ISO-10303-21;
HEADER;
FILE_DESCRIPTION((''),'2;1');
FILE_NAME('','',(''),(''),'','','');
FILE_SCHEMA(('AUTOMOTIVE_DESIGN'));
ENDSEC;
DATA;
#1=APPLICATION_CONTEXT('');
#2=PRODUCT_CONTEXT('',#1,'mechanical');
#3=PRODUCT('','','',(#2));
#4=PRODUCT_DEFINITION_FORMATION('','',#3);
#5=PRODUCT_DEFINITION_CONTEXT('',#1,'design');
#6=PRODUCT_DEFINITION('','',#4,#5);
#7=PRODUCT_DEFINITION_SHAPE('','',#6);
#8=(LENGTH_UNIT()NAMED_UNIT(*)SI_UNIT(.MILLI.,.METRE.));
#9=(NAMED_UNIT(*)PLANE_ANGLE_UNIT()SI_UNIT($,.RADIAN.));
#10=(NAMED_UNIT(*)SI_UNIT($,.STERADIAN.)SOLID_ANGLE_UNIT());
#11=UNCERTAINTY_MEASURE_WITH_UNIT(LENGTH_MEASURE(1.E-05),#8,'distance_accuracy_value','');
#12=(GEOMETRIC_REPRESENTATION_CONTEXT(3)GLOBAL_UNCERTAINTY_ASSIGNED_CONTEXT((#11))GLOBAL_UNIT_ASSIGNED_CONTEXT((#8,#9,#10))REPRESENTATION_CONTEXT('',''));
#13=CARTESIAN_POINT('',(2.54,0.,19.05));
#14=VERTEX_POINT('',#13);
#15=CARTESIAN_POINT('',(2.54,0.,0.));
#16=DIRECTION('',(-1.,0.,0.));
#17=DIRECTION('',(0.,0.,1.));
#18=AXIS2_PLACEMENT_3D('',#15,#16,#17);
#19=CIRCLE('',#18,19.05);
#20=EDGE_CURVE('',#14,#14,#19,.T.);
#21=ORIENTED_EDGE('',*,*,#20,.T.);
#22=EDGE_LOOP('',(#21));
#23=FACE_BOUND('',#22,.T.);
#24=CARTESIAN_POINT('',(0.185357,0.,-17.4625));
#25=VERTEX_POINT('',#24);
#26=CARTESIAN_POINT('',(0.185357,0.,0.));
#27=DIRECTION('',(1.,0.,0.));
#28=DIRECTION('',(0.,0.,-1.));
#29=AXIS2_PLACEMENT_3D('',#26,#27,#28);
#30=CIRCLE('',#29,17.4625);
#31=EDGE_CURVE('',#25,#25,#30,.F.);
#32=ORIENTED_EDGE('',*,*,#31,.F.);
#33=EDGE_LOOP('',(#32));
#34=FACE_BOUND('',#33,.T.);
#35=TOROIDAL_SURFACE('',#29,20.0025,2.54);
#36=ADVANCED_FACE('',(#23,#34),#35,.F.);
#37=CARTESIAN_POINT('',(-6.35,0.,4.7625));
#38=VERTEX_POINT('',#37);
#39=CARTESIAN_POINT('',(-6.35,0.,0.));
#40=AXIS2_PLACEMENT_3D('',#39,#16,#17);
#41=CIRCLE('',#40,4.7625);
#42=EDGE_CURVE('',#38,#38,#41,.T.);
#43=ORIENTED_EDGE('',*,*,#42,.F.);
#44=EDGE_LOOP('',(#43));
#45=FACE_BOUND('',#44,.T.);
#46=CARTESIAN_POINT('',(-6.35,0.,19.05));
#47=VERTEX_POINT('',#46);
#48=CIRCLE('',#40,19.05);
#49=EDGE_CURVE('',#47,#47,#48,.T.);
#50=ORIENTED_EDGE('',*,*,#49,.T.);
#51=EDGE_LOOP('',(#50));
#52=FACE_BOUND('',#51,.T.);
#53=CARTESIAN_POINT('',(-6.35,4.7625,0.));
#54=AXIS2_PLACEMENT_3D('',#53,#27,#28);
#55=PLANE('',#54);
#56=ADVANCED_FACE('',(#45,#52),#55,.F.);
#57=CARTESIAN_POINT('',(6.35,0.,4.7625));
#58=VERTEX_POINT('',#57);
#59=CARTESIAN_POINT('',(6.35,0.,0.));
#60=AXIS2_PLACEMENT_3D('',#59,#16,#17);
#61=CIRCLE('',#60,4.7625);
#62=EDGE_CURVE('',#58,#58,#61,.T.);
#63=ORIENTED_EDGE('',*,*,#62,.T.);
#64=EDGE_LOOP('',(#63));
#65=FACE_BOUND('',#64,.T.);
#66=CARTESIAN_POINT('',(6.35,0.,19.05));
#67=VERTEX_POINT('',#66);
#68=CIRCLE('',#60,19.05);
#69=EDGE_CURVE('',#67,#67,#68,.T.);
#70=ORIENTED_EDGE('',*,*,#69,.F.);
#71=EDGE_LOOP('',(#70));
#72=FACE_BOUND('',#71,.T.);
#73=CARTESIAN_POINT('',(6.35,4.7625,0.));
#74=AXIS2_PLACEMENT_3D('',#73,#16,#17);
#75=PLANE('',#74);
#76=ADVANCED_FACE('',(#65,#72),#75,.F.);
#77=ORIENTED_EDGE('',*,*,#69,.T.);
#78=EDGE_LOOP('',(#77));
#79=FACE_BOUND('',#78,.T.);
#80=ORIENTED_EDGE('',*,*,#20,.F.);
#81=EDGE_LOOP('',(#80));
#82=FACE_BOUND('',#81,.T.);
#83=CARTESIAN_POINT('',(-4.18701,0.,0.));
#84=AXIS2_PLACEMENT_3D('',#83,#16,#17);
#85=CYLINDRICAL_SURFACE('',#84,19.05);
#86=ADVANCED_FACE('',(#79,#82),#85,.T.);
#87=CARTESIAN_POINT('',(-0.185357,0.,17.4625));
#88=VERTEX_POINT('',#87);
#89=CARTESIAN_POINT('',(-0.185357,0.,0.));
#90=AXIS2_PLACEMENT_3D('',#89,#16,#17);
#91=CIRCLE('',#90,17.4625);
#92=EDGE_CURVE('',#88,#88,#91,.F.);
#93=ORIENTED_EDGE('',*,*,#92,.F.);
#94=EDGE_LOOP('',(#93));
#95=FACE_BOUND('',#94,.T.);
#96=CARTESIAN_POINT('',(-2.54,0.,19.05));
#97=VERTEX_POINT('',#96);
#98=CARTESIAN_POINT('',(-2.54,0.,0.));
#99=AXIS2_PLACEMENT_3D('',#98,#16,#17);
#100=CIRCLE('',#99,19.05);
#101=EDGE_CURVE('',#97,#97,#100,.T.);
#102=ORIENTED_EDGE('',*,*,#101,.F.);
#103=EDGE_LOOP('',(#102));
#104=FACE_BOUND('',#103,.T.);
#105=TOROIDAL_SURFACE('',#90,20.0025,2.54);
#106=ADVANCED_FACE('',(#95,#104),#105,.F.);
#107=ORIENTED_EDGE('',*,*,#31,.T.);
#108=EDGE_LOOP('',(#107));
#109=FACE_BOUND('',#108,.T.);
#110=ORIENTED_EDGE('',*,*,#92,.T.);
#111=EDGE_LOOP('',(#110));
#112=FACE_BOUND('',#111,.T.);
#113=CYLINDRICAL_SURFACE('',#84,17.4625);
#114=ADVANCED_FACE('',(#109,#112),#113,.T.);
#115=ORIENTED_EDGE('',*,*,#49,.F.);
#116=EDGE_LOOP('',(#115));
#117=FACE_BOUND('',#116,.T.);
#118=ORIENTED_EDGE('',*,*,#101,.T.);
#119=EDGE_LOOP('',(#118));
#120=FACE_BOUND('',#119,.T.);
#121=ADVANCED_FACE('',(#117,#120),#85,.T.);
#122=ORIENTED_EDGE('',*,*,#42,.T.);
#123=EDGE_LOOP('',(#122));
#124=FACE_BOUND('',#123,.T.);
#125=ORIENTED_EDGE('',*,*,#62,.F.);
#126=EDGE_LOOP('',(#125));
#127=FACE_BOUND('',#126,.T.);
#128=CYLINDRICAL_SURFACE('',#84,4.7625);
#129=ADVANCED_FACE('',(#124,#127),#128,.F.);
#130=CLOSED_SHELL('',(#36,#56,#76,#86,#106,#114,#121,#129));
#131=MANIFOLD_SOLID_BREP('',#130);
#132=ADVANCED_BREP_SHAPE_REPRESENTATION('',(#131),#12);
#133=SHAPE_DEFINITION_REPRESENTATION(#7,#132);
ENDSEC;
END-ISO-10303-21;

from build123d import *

# Parameters (mm, degrees)
FILLET1_R = 2.54


with BuildPart() as part:
    # Sketch1 → Revolve1 (revolve)
    with BuildSketch(Plane.XY, mode=Mode.PRIVATE) as revolve1_sk:
        Polygon((6.35, 4.7625), (-6.35, 4.7625), (-6.35, 19.05), (-2.54, 19.05), (-2.54, 17.4625), (2.54, 17.4625), (2.54, 19.05), (6.35, 19.05), align=None)
    revolve(revolve1_sk.sketch.rotate(Axis((-4.187009613, 0, 0), (1, 0, 0)), 90), axis=Axis((-4.187009613, 0, 0), (1, 0, 0)))

    # Fillet1
    # the kernel refuses this fillet: 2.54 mm, written as the material it adds along each edge
    with BuildSketch(Plane(origin=(-2.54, 0, 0), x_dir=(0, 0, 1), z_dir=(0, 1, 0))) as fillet1_piece_1:
        with BuildLine():
            CenterArc((20.0025, 2.35464302), FILLET1_R, 180, 67.975687163)
            Line((17.4625, 2.35464302), (17.4117, 2.35464302))
            Line((17.4117, 2.35464302), (17.4117, 0))
            Line((17.4117, 0), (17.4625, -0.0508))
            ThreePointArc((17.4625, -0.0508), (18.25625, -0.0508), (19.03095, -0.04709286))
            Line((19.03095, -0.04709286), (19.05, 0))
        make_face()
    revolve(axis=Axis((-2.54, 0, 0), (1, 0, 0)))
    with BuildSketch(Plane(origin=(2.54, 0, 0), x_dir=(0, 0, 1), z_dir=(0, 1, 0))) as fillet1_piece_2:
        with BuildLine():
            CenterArc((20.0025, -2.35464302), FILLET1_R, 112.024312837, 67.975687163)
            Line((19.05, 0), (19.03095, 0.04709286))
            ThreePointArc((19.03095, 0.04709286), (18.25625, 0.0508), (17.4625, 0.0508))
            Line((17.4625, 0.0508), (17.4117, 0))
            Line((17.4117, 0), (17.4117, -2.35464302))
            Line((17.4117, -2.35464302), (17.4625, -2.35464302))
        make_face()
    revolve(axis=Axis((2.54, 0, 0), (1, 0, 0)))


solid = part.part
